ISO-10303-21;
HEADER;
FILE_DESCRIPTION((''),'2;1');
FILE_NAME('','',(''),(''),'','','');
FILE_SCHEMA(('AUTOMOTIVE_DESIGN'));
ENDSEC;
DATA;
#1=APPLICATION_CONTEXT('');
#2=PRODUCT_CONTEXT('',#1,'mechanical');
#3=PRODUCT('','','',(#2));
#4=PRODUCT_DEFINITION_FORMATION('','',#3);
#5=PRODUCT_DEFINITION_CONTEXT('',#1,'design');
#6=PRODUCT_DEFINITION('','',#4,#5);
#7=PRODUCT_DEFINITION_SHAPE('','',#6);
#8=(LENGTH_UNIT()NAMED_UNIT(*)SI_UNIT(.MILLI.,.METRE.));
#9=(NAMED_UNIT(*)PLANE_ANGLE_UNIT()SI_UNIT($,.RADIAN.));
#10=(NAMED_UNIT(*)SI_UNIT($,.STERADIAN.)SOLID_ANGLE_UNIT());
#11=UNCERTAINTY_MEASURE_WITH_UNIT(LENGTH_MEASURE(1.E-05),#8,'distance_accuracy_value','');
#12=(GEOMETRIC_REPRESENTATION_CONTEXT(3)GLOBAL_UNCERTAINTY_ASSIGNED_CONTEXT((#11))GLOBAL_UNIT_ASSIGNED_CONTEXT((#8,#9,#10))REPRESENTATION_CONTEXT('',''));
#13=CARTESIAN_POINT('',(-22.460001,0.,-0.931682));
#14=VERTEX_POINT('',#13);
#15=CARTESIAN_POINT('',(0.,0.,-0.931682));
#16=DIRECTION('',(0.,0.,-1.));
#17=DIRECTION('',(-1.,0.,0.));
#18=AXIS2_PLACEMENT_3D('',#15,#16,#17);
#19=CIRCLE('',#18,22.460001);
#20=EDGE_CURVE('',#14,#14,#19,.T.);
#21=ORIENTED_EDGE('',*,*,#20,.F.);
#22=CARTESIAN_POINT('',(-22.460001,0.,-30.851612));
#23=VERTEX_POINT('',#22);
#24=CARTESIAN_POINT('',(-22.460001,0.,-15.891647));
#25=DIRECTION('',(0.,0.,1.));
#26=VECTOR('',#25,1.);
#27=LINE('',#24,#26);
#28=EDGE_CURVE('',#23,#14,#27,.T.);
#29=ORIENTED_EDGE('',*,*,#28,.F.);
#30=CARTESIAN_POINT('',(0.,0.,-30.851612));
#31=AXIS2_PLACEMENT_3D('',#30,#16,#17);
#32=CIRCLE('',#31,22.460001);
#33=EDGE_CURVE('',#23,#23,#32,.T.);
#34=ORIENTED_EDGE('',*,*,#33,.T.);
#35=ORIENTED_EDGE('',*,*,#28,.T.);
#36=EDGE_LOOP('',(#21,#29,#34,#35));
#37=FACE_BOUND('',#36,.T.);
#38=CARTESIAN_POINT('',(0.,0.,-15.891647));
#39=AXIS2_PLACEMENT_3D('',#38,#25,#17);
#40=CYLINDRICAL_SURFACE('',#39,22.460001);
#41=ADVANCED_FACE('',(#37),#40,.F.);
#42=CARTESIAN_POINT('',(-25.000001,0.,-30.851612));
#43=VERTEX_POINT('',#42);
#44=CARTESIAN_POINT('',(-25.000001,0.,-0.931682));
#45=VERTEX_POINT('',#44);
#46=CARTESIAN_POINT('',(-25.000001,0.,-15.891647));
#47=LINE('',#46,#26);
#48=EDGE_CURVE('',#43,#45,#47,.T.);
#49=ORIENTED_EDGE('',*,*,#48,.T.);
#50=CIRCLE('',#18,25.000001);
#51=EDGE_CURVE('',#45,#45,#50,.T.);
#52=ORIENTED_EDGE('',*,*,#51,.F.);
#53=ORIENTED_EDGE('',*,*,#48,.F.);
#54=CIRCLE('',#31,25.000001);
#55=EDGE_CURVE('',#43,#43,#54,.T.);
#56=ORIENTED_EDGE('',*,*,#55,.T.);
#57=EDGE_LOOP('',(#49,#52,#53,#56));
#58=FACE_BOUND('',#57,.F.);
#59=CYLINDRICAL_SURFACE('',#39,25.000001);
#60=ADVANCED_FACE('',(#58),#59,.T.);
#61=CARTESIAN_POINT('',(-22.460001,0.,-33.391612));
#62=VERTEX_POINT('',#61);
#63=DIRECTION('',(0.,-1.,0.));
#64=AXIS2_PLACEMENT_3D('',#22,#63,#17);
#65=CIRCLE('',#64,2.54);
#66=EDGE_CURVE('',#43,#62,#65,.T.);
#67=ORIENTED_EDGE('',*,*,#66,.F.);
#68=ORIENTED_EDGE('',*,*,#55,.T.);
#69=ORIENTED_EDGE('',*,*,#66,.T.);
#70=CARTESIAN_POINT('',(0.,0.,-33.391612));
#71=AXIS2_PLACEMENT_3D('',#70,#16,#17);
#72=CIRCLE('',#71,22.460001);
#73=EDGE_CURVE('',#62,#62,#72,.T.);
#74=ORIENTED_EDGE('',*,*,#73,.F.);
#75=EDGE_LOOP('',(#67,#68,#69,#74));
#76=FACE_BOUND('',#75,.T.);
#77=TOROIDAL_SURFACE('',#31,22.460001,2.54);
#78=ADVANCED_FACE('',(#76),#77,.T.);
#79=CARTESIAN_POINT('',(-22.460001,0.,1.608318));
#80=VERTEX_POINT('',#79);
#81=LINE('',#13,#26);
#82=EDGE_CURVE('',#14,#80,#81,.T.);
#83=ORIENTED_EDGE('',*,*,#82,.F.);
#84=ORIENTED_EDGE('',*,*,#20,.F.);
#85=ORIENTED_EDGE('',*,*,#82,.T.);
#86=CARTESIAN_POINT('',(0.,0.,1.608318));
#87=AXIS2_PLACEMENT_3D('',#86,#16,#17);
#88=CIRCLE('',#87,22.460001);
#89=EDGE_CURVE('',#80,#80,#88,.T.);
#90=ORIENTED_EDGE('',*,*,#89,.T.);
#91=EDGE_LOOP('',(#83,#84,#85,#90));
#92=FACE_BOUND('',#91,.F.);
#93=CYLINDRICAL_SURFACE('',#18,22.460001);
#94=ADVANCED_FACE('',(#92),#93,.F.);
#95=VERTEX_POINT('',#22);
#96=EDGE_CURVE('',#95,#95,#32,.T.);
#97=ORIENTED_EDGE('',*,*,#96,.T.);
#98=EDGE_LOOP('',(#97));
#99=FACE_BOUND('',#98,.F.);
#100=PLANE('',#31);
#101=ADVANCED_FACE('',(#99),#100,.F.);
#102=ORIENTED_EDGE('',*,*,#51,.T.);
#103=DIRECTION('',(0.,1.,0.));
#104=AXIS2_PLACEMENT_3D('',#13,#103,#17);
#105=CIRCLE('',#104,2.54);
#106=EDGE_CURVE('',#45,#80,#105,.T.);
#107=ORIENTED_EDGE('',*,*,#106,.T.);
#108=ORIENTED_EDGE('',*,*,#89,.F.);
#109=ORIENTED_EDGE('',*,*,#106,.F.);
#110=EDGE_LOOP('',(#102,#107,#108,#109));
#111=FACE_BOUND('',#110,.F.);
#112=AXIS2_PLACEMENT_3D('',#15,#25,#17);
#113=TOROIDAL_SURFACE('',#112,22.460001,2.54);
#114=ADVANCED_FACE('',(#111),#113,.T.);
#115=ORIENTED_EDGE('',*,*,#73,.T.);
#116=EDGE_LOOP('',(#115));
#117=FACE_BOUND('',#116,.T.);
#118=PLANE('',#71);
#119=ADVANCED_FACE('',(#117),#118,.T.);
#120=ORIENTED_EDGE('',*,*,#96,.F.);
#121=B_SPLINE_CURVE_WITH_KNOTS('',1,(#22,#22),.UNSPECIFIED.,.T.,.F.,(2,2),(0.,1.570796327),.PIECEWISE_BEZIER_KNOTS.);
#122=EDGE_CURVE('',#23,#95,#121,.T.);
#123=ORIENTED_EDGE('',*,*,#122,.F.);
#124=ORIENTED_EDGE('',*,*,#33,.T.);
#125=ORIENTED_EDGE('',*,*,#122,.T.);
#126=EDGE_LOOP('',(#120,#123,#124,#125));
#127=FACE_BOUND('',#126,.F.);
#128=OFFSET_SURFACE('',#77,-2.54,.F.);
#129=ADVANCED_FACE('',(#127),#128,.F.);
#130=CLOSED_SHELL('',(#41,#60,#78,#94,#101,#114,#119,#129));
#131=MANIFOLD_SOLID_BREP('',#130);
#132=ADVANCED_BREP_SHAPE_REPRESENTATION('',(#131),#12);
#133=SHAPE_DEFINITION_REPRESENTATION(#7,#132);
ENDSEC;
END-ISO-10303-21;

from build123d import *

# Parameters (mm, degrees)
F0_W = 25.0000008
F0_H = 34.99993
F2_R = 2.54
F3_T = -2.54


# Not quite as in the source:
# - a shell that OpenCascade refuses in one call is made with other operations: the cavity is built on its own and cut out


with BuildPart() as f1:
    # F0 (on Front) → F1 (revolve)
    with BuildSketch(Plane.XZ):
        with Locations((-12.5000004, -15.8916468867)):
            Rectangle(F0_W, F0_H)
    revolve(axis=Axis((0, 0, -15.8916468867), (0, 0, -1)))

    # F2
    f2_edges = [f1.edges().sort_by_distance(p)[0] for p in [
        (25.000001, 0, 1.608318),
        (25.000001, 0, -33.391612),
    ]]
    fillet(f2_edges, radius=F2_R)

    # F3: a shell. OpenCascade refuses it in one call, so the cavity is built on its own and cut out:
    # the body offset inwards by the wall thickness, plus a prism from it out through each open face.
    f3_core = offset(f1.part, amount=F3_T, kind=Kind.INTERSECTION, mode=Mode.PRIVATE)
    f3_exits = [f3_core.faces().sort_by_distance(p)[0] for p in [
        (0, 0, -0.931682),
    ]]
    add(f3_core, mode=Mode.SUBTRACT)
    extrude(f3_exits, amount=-F3_T, mode=Mode.SUBTRACT)


solid = f1.part
